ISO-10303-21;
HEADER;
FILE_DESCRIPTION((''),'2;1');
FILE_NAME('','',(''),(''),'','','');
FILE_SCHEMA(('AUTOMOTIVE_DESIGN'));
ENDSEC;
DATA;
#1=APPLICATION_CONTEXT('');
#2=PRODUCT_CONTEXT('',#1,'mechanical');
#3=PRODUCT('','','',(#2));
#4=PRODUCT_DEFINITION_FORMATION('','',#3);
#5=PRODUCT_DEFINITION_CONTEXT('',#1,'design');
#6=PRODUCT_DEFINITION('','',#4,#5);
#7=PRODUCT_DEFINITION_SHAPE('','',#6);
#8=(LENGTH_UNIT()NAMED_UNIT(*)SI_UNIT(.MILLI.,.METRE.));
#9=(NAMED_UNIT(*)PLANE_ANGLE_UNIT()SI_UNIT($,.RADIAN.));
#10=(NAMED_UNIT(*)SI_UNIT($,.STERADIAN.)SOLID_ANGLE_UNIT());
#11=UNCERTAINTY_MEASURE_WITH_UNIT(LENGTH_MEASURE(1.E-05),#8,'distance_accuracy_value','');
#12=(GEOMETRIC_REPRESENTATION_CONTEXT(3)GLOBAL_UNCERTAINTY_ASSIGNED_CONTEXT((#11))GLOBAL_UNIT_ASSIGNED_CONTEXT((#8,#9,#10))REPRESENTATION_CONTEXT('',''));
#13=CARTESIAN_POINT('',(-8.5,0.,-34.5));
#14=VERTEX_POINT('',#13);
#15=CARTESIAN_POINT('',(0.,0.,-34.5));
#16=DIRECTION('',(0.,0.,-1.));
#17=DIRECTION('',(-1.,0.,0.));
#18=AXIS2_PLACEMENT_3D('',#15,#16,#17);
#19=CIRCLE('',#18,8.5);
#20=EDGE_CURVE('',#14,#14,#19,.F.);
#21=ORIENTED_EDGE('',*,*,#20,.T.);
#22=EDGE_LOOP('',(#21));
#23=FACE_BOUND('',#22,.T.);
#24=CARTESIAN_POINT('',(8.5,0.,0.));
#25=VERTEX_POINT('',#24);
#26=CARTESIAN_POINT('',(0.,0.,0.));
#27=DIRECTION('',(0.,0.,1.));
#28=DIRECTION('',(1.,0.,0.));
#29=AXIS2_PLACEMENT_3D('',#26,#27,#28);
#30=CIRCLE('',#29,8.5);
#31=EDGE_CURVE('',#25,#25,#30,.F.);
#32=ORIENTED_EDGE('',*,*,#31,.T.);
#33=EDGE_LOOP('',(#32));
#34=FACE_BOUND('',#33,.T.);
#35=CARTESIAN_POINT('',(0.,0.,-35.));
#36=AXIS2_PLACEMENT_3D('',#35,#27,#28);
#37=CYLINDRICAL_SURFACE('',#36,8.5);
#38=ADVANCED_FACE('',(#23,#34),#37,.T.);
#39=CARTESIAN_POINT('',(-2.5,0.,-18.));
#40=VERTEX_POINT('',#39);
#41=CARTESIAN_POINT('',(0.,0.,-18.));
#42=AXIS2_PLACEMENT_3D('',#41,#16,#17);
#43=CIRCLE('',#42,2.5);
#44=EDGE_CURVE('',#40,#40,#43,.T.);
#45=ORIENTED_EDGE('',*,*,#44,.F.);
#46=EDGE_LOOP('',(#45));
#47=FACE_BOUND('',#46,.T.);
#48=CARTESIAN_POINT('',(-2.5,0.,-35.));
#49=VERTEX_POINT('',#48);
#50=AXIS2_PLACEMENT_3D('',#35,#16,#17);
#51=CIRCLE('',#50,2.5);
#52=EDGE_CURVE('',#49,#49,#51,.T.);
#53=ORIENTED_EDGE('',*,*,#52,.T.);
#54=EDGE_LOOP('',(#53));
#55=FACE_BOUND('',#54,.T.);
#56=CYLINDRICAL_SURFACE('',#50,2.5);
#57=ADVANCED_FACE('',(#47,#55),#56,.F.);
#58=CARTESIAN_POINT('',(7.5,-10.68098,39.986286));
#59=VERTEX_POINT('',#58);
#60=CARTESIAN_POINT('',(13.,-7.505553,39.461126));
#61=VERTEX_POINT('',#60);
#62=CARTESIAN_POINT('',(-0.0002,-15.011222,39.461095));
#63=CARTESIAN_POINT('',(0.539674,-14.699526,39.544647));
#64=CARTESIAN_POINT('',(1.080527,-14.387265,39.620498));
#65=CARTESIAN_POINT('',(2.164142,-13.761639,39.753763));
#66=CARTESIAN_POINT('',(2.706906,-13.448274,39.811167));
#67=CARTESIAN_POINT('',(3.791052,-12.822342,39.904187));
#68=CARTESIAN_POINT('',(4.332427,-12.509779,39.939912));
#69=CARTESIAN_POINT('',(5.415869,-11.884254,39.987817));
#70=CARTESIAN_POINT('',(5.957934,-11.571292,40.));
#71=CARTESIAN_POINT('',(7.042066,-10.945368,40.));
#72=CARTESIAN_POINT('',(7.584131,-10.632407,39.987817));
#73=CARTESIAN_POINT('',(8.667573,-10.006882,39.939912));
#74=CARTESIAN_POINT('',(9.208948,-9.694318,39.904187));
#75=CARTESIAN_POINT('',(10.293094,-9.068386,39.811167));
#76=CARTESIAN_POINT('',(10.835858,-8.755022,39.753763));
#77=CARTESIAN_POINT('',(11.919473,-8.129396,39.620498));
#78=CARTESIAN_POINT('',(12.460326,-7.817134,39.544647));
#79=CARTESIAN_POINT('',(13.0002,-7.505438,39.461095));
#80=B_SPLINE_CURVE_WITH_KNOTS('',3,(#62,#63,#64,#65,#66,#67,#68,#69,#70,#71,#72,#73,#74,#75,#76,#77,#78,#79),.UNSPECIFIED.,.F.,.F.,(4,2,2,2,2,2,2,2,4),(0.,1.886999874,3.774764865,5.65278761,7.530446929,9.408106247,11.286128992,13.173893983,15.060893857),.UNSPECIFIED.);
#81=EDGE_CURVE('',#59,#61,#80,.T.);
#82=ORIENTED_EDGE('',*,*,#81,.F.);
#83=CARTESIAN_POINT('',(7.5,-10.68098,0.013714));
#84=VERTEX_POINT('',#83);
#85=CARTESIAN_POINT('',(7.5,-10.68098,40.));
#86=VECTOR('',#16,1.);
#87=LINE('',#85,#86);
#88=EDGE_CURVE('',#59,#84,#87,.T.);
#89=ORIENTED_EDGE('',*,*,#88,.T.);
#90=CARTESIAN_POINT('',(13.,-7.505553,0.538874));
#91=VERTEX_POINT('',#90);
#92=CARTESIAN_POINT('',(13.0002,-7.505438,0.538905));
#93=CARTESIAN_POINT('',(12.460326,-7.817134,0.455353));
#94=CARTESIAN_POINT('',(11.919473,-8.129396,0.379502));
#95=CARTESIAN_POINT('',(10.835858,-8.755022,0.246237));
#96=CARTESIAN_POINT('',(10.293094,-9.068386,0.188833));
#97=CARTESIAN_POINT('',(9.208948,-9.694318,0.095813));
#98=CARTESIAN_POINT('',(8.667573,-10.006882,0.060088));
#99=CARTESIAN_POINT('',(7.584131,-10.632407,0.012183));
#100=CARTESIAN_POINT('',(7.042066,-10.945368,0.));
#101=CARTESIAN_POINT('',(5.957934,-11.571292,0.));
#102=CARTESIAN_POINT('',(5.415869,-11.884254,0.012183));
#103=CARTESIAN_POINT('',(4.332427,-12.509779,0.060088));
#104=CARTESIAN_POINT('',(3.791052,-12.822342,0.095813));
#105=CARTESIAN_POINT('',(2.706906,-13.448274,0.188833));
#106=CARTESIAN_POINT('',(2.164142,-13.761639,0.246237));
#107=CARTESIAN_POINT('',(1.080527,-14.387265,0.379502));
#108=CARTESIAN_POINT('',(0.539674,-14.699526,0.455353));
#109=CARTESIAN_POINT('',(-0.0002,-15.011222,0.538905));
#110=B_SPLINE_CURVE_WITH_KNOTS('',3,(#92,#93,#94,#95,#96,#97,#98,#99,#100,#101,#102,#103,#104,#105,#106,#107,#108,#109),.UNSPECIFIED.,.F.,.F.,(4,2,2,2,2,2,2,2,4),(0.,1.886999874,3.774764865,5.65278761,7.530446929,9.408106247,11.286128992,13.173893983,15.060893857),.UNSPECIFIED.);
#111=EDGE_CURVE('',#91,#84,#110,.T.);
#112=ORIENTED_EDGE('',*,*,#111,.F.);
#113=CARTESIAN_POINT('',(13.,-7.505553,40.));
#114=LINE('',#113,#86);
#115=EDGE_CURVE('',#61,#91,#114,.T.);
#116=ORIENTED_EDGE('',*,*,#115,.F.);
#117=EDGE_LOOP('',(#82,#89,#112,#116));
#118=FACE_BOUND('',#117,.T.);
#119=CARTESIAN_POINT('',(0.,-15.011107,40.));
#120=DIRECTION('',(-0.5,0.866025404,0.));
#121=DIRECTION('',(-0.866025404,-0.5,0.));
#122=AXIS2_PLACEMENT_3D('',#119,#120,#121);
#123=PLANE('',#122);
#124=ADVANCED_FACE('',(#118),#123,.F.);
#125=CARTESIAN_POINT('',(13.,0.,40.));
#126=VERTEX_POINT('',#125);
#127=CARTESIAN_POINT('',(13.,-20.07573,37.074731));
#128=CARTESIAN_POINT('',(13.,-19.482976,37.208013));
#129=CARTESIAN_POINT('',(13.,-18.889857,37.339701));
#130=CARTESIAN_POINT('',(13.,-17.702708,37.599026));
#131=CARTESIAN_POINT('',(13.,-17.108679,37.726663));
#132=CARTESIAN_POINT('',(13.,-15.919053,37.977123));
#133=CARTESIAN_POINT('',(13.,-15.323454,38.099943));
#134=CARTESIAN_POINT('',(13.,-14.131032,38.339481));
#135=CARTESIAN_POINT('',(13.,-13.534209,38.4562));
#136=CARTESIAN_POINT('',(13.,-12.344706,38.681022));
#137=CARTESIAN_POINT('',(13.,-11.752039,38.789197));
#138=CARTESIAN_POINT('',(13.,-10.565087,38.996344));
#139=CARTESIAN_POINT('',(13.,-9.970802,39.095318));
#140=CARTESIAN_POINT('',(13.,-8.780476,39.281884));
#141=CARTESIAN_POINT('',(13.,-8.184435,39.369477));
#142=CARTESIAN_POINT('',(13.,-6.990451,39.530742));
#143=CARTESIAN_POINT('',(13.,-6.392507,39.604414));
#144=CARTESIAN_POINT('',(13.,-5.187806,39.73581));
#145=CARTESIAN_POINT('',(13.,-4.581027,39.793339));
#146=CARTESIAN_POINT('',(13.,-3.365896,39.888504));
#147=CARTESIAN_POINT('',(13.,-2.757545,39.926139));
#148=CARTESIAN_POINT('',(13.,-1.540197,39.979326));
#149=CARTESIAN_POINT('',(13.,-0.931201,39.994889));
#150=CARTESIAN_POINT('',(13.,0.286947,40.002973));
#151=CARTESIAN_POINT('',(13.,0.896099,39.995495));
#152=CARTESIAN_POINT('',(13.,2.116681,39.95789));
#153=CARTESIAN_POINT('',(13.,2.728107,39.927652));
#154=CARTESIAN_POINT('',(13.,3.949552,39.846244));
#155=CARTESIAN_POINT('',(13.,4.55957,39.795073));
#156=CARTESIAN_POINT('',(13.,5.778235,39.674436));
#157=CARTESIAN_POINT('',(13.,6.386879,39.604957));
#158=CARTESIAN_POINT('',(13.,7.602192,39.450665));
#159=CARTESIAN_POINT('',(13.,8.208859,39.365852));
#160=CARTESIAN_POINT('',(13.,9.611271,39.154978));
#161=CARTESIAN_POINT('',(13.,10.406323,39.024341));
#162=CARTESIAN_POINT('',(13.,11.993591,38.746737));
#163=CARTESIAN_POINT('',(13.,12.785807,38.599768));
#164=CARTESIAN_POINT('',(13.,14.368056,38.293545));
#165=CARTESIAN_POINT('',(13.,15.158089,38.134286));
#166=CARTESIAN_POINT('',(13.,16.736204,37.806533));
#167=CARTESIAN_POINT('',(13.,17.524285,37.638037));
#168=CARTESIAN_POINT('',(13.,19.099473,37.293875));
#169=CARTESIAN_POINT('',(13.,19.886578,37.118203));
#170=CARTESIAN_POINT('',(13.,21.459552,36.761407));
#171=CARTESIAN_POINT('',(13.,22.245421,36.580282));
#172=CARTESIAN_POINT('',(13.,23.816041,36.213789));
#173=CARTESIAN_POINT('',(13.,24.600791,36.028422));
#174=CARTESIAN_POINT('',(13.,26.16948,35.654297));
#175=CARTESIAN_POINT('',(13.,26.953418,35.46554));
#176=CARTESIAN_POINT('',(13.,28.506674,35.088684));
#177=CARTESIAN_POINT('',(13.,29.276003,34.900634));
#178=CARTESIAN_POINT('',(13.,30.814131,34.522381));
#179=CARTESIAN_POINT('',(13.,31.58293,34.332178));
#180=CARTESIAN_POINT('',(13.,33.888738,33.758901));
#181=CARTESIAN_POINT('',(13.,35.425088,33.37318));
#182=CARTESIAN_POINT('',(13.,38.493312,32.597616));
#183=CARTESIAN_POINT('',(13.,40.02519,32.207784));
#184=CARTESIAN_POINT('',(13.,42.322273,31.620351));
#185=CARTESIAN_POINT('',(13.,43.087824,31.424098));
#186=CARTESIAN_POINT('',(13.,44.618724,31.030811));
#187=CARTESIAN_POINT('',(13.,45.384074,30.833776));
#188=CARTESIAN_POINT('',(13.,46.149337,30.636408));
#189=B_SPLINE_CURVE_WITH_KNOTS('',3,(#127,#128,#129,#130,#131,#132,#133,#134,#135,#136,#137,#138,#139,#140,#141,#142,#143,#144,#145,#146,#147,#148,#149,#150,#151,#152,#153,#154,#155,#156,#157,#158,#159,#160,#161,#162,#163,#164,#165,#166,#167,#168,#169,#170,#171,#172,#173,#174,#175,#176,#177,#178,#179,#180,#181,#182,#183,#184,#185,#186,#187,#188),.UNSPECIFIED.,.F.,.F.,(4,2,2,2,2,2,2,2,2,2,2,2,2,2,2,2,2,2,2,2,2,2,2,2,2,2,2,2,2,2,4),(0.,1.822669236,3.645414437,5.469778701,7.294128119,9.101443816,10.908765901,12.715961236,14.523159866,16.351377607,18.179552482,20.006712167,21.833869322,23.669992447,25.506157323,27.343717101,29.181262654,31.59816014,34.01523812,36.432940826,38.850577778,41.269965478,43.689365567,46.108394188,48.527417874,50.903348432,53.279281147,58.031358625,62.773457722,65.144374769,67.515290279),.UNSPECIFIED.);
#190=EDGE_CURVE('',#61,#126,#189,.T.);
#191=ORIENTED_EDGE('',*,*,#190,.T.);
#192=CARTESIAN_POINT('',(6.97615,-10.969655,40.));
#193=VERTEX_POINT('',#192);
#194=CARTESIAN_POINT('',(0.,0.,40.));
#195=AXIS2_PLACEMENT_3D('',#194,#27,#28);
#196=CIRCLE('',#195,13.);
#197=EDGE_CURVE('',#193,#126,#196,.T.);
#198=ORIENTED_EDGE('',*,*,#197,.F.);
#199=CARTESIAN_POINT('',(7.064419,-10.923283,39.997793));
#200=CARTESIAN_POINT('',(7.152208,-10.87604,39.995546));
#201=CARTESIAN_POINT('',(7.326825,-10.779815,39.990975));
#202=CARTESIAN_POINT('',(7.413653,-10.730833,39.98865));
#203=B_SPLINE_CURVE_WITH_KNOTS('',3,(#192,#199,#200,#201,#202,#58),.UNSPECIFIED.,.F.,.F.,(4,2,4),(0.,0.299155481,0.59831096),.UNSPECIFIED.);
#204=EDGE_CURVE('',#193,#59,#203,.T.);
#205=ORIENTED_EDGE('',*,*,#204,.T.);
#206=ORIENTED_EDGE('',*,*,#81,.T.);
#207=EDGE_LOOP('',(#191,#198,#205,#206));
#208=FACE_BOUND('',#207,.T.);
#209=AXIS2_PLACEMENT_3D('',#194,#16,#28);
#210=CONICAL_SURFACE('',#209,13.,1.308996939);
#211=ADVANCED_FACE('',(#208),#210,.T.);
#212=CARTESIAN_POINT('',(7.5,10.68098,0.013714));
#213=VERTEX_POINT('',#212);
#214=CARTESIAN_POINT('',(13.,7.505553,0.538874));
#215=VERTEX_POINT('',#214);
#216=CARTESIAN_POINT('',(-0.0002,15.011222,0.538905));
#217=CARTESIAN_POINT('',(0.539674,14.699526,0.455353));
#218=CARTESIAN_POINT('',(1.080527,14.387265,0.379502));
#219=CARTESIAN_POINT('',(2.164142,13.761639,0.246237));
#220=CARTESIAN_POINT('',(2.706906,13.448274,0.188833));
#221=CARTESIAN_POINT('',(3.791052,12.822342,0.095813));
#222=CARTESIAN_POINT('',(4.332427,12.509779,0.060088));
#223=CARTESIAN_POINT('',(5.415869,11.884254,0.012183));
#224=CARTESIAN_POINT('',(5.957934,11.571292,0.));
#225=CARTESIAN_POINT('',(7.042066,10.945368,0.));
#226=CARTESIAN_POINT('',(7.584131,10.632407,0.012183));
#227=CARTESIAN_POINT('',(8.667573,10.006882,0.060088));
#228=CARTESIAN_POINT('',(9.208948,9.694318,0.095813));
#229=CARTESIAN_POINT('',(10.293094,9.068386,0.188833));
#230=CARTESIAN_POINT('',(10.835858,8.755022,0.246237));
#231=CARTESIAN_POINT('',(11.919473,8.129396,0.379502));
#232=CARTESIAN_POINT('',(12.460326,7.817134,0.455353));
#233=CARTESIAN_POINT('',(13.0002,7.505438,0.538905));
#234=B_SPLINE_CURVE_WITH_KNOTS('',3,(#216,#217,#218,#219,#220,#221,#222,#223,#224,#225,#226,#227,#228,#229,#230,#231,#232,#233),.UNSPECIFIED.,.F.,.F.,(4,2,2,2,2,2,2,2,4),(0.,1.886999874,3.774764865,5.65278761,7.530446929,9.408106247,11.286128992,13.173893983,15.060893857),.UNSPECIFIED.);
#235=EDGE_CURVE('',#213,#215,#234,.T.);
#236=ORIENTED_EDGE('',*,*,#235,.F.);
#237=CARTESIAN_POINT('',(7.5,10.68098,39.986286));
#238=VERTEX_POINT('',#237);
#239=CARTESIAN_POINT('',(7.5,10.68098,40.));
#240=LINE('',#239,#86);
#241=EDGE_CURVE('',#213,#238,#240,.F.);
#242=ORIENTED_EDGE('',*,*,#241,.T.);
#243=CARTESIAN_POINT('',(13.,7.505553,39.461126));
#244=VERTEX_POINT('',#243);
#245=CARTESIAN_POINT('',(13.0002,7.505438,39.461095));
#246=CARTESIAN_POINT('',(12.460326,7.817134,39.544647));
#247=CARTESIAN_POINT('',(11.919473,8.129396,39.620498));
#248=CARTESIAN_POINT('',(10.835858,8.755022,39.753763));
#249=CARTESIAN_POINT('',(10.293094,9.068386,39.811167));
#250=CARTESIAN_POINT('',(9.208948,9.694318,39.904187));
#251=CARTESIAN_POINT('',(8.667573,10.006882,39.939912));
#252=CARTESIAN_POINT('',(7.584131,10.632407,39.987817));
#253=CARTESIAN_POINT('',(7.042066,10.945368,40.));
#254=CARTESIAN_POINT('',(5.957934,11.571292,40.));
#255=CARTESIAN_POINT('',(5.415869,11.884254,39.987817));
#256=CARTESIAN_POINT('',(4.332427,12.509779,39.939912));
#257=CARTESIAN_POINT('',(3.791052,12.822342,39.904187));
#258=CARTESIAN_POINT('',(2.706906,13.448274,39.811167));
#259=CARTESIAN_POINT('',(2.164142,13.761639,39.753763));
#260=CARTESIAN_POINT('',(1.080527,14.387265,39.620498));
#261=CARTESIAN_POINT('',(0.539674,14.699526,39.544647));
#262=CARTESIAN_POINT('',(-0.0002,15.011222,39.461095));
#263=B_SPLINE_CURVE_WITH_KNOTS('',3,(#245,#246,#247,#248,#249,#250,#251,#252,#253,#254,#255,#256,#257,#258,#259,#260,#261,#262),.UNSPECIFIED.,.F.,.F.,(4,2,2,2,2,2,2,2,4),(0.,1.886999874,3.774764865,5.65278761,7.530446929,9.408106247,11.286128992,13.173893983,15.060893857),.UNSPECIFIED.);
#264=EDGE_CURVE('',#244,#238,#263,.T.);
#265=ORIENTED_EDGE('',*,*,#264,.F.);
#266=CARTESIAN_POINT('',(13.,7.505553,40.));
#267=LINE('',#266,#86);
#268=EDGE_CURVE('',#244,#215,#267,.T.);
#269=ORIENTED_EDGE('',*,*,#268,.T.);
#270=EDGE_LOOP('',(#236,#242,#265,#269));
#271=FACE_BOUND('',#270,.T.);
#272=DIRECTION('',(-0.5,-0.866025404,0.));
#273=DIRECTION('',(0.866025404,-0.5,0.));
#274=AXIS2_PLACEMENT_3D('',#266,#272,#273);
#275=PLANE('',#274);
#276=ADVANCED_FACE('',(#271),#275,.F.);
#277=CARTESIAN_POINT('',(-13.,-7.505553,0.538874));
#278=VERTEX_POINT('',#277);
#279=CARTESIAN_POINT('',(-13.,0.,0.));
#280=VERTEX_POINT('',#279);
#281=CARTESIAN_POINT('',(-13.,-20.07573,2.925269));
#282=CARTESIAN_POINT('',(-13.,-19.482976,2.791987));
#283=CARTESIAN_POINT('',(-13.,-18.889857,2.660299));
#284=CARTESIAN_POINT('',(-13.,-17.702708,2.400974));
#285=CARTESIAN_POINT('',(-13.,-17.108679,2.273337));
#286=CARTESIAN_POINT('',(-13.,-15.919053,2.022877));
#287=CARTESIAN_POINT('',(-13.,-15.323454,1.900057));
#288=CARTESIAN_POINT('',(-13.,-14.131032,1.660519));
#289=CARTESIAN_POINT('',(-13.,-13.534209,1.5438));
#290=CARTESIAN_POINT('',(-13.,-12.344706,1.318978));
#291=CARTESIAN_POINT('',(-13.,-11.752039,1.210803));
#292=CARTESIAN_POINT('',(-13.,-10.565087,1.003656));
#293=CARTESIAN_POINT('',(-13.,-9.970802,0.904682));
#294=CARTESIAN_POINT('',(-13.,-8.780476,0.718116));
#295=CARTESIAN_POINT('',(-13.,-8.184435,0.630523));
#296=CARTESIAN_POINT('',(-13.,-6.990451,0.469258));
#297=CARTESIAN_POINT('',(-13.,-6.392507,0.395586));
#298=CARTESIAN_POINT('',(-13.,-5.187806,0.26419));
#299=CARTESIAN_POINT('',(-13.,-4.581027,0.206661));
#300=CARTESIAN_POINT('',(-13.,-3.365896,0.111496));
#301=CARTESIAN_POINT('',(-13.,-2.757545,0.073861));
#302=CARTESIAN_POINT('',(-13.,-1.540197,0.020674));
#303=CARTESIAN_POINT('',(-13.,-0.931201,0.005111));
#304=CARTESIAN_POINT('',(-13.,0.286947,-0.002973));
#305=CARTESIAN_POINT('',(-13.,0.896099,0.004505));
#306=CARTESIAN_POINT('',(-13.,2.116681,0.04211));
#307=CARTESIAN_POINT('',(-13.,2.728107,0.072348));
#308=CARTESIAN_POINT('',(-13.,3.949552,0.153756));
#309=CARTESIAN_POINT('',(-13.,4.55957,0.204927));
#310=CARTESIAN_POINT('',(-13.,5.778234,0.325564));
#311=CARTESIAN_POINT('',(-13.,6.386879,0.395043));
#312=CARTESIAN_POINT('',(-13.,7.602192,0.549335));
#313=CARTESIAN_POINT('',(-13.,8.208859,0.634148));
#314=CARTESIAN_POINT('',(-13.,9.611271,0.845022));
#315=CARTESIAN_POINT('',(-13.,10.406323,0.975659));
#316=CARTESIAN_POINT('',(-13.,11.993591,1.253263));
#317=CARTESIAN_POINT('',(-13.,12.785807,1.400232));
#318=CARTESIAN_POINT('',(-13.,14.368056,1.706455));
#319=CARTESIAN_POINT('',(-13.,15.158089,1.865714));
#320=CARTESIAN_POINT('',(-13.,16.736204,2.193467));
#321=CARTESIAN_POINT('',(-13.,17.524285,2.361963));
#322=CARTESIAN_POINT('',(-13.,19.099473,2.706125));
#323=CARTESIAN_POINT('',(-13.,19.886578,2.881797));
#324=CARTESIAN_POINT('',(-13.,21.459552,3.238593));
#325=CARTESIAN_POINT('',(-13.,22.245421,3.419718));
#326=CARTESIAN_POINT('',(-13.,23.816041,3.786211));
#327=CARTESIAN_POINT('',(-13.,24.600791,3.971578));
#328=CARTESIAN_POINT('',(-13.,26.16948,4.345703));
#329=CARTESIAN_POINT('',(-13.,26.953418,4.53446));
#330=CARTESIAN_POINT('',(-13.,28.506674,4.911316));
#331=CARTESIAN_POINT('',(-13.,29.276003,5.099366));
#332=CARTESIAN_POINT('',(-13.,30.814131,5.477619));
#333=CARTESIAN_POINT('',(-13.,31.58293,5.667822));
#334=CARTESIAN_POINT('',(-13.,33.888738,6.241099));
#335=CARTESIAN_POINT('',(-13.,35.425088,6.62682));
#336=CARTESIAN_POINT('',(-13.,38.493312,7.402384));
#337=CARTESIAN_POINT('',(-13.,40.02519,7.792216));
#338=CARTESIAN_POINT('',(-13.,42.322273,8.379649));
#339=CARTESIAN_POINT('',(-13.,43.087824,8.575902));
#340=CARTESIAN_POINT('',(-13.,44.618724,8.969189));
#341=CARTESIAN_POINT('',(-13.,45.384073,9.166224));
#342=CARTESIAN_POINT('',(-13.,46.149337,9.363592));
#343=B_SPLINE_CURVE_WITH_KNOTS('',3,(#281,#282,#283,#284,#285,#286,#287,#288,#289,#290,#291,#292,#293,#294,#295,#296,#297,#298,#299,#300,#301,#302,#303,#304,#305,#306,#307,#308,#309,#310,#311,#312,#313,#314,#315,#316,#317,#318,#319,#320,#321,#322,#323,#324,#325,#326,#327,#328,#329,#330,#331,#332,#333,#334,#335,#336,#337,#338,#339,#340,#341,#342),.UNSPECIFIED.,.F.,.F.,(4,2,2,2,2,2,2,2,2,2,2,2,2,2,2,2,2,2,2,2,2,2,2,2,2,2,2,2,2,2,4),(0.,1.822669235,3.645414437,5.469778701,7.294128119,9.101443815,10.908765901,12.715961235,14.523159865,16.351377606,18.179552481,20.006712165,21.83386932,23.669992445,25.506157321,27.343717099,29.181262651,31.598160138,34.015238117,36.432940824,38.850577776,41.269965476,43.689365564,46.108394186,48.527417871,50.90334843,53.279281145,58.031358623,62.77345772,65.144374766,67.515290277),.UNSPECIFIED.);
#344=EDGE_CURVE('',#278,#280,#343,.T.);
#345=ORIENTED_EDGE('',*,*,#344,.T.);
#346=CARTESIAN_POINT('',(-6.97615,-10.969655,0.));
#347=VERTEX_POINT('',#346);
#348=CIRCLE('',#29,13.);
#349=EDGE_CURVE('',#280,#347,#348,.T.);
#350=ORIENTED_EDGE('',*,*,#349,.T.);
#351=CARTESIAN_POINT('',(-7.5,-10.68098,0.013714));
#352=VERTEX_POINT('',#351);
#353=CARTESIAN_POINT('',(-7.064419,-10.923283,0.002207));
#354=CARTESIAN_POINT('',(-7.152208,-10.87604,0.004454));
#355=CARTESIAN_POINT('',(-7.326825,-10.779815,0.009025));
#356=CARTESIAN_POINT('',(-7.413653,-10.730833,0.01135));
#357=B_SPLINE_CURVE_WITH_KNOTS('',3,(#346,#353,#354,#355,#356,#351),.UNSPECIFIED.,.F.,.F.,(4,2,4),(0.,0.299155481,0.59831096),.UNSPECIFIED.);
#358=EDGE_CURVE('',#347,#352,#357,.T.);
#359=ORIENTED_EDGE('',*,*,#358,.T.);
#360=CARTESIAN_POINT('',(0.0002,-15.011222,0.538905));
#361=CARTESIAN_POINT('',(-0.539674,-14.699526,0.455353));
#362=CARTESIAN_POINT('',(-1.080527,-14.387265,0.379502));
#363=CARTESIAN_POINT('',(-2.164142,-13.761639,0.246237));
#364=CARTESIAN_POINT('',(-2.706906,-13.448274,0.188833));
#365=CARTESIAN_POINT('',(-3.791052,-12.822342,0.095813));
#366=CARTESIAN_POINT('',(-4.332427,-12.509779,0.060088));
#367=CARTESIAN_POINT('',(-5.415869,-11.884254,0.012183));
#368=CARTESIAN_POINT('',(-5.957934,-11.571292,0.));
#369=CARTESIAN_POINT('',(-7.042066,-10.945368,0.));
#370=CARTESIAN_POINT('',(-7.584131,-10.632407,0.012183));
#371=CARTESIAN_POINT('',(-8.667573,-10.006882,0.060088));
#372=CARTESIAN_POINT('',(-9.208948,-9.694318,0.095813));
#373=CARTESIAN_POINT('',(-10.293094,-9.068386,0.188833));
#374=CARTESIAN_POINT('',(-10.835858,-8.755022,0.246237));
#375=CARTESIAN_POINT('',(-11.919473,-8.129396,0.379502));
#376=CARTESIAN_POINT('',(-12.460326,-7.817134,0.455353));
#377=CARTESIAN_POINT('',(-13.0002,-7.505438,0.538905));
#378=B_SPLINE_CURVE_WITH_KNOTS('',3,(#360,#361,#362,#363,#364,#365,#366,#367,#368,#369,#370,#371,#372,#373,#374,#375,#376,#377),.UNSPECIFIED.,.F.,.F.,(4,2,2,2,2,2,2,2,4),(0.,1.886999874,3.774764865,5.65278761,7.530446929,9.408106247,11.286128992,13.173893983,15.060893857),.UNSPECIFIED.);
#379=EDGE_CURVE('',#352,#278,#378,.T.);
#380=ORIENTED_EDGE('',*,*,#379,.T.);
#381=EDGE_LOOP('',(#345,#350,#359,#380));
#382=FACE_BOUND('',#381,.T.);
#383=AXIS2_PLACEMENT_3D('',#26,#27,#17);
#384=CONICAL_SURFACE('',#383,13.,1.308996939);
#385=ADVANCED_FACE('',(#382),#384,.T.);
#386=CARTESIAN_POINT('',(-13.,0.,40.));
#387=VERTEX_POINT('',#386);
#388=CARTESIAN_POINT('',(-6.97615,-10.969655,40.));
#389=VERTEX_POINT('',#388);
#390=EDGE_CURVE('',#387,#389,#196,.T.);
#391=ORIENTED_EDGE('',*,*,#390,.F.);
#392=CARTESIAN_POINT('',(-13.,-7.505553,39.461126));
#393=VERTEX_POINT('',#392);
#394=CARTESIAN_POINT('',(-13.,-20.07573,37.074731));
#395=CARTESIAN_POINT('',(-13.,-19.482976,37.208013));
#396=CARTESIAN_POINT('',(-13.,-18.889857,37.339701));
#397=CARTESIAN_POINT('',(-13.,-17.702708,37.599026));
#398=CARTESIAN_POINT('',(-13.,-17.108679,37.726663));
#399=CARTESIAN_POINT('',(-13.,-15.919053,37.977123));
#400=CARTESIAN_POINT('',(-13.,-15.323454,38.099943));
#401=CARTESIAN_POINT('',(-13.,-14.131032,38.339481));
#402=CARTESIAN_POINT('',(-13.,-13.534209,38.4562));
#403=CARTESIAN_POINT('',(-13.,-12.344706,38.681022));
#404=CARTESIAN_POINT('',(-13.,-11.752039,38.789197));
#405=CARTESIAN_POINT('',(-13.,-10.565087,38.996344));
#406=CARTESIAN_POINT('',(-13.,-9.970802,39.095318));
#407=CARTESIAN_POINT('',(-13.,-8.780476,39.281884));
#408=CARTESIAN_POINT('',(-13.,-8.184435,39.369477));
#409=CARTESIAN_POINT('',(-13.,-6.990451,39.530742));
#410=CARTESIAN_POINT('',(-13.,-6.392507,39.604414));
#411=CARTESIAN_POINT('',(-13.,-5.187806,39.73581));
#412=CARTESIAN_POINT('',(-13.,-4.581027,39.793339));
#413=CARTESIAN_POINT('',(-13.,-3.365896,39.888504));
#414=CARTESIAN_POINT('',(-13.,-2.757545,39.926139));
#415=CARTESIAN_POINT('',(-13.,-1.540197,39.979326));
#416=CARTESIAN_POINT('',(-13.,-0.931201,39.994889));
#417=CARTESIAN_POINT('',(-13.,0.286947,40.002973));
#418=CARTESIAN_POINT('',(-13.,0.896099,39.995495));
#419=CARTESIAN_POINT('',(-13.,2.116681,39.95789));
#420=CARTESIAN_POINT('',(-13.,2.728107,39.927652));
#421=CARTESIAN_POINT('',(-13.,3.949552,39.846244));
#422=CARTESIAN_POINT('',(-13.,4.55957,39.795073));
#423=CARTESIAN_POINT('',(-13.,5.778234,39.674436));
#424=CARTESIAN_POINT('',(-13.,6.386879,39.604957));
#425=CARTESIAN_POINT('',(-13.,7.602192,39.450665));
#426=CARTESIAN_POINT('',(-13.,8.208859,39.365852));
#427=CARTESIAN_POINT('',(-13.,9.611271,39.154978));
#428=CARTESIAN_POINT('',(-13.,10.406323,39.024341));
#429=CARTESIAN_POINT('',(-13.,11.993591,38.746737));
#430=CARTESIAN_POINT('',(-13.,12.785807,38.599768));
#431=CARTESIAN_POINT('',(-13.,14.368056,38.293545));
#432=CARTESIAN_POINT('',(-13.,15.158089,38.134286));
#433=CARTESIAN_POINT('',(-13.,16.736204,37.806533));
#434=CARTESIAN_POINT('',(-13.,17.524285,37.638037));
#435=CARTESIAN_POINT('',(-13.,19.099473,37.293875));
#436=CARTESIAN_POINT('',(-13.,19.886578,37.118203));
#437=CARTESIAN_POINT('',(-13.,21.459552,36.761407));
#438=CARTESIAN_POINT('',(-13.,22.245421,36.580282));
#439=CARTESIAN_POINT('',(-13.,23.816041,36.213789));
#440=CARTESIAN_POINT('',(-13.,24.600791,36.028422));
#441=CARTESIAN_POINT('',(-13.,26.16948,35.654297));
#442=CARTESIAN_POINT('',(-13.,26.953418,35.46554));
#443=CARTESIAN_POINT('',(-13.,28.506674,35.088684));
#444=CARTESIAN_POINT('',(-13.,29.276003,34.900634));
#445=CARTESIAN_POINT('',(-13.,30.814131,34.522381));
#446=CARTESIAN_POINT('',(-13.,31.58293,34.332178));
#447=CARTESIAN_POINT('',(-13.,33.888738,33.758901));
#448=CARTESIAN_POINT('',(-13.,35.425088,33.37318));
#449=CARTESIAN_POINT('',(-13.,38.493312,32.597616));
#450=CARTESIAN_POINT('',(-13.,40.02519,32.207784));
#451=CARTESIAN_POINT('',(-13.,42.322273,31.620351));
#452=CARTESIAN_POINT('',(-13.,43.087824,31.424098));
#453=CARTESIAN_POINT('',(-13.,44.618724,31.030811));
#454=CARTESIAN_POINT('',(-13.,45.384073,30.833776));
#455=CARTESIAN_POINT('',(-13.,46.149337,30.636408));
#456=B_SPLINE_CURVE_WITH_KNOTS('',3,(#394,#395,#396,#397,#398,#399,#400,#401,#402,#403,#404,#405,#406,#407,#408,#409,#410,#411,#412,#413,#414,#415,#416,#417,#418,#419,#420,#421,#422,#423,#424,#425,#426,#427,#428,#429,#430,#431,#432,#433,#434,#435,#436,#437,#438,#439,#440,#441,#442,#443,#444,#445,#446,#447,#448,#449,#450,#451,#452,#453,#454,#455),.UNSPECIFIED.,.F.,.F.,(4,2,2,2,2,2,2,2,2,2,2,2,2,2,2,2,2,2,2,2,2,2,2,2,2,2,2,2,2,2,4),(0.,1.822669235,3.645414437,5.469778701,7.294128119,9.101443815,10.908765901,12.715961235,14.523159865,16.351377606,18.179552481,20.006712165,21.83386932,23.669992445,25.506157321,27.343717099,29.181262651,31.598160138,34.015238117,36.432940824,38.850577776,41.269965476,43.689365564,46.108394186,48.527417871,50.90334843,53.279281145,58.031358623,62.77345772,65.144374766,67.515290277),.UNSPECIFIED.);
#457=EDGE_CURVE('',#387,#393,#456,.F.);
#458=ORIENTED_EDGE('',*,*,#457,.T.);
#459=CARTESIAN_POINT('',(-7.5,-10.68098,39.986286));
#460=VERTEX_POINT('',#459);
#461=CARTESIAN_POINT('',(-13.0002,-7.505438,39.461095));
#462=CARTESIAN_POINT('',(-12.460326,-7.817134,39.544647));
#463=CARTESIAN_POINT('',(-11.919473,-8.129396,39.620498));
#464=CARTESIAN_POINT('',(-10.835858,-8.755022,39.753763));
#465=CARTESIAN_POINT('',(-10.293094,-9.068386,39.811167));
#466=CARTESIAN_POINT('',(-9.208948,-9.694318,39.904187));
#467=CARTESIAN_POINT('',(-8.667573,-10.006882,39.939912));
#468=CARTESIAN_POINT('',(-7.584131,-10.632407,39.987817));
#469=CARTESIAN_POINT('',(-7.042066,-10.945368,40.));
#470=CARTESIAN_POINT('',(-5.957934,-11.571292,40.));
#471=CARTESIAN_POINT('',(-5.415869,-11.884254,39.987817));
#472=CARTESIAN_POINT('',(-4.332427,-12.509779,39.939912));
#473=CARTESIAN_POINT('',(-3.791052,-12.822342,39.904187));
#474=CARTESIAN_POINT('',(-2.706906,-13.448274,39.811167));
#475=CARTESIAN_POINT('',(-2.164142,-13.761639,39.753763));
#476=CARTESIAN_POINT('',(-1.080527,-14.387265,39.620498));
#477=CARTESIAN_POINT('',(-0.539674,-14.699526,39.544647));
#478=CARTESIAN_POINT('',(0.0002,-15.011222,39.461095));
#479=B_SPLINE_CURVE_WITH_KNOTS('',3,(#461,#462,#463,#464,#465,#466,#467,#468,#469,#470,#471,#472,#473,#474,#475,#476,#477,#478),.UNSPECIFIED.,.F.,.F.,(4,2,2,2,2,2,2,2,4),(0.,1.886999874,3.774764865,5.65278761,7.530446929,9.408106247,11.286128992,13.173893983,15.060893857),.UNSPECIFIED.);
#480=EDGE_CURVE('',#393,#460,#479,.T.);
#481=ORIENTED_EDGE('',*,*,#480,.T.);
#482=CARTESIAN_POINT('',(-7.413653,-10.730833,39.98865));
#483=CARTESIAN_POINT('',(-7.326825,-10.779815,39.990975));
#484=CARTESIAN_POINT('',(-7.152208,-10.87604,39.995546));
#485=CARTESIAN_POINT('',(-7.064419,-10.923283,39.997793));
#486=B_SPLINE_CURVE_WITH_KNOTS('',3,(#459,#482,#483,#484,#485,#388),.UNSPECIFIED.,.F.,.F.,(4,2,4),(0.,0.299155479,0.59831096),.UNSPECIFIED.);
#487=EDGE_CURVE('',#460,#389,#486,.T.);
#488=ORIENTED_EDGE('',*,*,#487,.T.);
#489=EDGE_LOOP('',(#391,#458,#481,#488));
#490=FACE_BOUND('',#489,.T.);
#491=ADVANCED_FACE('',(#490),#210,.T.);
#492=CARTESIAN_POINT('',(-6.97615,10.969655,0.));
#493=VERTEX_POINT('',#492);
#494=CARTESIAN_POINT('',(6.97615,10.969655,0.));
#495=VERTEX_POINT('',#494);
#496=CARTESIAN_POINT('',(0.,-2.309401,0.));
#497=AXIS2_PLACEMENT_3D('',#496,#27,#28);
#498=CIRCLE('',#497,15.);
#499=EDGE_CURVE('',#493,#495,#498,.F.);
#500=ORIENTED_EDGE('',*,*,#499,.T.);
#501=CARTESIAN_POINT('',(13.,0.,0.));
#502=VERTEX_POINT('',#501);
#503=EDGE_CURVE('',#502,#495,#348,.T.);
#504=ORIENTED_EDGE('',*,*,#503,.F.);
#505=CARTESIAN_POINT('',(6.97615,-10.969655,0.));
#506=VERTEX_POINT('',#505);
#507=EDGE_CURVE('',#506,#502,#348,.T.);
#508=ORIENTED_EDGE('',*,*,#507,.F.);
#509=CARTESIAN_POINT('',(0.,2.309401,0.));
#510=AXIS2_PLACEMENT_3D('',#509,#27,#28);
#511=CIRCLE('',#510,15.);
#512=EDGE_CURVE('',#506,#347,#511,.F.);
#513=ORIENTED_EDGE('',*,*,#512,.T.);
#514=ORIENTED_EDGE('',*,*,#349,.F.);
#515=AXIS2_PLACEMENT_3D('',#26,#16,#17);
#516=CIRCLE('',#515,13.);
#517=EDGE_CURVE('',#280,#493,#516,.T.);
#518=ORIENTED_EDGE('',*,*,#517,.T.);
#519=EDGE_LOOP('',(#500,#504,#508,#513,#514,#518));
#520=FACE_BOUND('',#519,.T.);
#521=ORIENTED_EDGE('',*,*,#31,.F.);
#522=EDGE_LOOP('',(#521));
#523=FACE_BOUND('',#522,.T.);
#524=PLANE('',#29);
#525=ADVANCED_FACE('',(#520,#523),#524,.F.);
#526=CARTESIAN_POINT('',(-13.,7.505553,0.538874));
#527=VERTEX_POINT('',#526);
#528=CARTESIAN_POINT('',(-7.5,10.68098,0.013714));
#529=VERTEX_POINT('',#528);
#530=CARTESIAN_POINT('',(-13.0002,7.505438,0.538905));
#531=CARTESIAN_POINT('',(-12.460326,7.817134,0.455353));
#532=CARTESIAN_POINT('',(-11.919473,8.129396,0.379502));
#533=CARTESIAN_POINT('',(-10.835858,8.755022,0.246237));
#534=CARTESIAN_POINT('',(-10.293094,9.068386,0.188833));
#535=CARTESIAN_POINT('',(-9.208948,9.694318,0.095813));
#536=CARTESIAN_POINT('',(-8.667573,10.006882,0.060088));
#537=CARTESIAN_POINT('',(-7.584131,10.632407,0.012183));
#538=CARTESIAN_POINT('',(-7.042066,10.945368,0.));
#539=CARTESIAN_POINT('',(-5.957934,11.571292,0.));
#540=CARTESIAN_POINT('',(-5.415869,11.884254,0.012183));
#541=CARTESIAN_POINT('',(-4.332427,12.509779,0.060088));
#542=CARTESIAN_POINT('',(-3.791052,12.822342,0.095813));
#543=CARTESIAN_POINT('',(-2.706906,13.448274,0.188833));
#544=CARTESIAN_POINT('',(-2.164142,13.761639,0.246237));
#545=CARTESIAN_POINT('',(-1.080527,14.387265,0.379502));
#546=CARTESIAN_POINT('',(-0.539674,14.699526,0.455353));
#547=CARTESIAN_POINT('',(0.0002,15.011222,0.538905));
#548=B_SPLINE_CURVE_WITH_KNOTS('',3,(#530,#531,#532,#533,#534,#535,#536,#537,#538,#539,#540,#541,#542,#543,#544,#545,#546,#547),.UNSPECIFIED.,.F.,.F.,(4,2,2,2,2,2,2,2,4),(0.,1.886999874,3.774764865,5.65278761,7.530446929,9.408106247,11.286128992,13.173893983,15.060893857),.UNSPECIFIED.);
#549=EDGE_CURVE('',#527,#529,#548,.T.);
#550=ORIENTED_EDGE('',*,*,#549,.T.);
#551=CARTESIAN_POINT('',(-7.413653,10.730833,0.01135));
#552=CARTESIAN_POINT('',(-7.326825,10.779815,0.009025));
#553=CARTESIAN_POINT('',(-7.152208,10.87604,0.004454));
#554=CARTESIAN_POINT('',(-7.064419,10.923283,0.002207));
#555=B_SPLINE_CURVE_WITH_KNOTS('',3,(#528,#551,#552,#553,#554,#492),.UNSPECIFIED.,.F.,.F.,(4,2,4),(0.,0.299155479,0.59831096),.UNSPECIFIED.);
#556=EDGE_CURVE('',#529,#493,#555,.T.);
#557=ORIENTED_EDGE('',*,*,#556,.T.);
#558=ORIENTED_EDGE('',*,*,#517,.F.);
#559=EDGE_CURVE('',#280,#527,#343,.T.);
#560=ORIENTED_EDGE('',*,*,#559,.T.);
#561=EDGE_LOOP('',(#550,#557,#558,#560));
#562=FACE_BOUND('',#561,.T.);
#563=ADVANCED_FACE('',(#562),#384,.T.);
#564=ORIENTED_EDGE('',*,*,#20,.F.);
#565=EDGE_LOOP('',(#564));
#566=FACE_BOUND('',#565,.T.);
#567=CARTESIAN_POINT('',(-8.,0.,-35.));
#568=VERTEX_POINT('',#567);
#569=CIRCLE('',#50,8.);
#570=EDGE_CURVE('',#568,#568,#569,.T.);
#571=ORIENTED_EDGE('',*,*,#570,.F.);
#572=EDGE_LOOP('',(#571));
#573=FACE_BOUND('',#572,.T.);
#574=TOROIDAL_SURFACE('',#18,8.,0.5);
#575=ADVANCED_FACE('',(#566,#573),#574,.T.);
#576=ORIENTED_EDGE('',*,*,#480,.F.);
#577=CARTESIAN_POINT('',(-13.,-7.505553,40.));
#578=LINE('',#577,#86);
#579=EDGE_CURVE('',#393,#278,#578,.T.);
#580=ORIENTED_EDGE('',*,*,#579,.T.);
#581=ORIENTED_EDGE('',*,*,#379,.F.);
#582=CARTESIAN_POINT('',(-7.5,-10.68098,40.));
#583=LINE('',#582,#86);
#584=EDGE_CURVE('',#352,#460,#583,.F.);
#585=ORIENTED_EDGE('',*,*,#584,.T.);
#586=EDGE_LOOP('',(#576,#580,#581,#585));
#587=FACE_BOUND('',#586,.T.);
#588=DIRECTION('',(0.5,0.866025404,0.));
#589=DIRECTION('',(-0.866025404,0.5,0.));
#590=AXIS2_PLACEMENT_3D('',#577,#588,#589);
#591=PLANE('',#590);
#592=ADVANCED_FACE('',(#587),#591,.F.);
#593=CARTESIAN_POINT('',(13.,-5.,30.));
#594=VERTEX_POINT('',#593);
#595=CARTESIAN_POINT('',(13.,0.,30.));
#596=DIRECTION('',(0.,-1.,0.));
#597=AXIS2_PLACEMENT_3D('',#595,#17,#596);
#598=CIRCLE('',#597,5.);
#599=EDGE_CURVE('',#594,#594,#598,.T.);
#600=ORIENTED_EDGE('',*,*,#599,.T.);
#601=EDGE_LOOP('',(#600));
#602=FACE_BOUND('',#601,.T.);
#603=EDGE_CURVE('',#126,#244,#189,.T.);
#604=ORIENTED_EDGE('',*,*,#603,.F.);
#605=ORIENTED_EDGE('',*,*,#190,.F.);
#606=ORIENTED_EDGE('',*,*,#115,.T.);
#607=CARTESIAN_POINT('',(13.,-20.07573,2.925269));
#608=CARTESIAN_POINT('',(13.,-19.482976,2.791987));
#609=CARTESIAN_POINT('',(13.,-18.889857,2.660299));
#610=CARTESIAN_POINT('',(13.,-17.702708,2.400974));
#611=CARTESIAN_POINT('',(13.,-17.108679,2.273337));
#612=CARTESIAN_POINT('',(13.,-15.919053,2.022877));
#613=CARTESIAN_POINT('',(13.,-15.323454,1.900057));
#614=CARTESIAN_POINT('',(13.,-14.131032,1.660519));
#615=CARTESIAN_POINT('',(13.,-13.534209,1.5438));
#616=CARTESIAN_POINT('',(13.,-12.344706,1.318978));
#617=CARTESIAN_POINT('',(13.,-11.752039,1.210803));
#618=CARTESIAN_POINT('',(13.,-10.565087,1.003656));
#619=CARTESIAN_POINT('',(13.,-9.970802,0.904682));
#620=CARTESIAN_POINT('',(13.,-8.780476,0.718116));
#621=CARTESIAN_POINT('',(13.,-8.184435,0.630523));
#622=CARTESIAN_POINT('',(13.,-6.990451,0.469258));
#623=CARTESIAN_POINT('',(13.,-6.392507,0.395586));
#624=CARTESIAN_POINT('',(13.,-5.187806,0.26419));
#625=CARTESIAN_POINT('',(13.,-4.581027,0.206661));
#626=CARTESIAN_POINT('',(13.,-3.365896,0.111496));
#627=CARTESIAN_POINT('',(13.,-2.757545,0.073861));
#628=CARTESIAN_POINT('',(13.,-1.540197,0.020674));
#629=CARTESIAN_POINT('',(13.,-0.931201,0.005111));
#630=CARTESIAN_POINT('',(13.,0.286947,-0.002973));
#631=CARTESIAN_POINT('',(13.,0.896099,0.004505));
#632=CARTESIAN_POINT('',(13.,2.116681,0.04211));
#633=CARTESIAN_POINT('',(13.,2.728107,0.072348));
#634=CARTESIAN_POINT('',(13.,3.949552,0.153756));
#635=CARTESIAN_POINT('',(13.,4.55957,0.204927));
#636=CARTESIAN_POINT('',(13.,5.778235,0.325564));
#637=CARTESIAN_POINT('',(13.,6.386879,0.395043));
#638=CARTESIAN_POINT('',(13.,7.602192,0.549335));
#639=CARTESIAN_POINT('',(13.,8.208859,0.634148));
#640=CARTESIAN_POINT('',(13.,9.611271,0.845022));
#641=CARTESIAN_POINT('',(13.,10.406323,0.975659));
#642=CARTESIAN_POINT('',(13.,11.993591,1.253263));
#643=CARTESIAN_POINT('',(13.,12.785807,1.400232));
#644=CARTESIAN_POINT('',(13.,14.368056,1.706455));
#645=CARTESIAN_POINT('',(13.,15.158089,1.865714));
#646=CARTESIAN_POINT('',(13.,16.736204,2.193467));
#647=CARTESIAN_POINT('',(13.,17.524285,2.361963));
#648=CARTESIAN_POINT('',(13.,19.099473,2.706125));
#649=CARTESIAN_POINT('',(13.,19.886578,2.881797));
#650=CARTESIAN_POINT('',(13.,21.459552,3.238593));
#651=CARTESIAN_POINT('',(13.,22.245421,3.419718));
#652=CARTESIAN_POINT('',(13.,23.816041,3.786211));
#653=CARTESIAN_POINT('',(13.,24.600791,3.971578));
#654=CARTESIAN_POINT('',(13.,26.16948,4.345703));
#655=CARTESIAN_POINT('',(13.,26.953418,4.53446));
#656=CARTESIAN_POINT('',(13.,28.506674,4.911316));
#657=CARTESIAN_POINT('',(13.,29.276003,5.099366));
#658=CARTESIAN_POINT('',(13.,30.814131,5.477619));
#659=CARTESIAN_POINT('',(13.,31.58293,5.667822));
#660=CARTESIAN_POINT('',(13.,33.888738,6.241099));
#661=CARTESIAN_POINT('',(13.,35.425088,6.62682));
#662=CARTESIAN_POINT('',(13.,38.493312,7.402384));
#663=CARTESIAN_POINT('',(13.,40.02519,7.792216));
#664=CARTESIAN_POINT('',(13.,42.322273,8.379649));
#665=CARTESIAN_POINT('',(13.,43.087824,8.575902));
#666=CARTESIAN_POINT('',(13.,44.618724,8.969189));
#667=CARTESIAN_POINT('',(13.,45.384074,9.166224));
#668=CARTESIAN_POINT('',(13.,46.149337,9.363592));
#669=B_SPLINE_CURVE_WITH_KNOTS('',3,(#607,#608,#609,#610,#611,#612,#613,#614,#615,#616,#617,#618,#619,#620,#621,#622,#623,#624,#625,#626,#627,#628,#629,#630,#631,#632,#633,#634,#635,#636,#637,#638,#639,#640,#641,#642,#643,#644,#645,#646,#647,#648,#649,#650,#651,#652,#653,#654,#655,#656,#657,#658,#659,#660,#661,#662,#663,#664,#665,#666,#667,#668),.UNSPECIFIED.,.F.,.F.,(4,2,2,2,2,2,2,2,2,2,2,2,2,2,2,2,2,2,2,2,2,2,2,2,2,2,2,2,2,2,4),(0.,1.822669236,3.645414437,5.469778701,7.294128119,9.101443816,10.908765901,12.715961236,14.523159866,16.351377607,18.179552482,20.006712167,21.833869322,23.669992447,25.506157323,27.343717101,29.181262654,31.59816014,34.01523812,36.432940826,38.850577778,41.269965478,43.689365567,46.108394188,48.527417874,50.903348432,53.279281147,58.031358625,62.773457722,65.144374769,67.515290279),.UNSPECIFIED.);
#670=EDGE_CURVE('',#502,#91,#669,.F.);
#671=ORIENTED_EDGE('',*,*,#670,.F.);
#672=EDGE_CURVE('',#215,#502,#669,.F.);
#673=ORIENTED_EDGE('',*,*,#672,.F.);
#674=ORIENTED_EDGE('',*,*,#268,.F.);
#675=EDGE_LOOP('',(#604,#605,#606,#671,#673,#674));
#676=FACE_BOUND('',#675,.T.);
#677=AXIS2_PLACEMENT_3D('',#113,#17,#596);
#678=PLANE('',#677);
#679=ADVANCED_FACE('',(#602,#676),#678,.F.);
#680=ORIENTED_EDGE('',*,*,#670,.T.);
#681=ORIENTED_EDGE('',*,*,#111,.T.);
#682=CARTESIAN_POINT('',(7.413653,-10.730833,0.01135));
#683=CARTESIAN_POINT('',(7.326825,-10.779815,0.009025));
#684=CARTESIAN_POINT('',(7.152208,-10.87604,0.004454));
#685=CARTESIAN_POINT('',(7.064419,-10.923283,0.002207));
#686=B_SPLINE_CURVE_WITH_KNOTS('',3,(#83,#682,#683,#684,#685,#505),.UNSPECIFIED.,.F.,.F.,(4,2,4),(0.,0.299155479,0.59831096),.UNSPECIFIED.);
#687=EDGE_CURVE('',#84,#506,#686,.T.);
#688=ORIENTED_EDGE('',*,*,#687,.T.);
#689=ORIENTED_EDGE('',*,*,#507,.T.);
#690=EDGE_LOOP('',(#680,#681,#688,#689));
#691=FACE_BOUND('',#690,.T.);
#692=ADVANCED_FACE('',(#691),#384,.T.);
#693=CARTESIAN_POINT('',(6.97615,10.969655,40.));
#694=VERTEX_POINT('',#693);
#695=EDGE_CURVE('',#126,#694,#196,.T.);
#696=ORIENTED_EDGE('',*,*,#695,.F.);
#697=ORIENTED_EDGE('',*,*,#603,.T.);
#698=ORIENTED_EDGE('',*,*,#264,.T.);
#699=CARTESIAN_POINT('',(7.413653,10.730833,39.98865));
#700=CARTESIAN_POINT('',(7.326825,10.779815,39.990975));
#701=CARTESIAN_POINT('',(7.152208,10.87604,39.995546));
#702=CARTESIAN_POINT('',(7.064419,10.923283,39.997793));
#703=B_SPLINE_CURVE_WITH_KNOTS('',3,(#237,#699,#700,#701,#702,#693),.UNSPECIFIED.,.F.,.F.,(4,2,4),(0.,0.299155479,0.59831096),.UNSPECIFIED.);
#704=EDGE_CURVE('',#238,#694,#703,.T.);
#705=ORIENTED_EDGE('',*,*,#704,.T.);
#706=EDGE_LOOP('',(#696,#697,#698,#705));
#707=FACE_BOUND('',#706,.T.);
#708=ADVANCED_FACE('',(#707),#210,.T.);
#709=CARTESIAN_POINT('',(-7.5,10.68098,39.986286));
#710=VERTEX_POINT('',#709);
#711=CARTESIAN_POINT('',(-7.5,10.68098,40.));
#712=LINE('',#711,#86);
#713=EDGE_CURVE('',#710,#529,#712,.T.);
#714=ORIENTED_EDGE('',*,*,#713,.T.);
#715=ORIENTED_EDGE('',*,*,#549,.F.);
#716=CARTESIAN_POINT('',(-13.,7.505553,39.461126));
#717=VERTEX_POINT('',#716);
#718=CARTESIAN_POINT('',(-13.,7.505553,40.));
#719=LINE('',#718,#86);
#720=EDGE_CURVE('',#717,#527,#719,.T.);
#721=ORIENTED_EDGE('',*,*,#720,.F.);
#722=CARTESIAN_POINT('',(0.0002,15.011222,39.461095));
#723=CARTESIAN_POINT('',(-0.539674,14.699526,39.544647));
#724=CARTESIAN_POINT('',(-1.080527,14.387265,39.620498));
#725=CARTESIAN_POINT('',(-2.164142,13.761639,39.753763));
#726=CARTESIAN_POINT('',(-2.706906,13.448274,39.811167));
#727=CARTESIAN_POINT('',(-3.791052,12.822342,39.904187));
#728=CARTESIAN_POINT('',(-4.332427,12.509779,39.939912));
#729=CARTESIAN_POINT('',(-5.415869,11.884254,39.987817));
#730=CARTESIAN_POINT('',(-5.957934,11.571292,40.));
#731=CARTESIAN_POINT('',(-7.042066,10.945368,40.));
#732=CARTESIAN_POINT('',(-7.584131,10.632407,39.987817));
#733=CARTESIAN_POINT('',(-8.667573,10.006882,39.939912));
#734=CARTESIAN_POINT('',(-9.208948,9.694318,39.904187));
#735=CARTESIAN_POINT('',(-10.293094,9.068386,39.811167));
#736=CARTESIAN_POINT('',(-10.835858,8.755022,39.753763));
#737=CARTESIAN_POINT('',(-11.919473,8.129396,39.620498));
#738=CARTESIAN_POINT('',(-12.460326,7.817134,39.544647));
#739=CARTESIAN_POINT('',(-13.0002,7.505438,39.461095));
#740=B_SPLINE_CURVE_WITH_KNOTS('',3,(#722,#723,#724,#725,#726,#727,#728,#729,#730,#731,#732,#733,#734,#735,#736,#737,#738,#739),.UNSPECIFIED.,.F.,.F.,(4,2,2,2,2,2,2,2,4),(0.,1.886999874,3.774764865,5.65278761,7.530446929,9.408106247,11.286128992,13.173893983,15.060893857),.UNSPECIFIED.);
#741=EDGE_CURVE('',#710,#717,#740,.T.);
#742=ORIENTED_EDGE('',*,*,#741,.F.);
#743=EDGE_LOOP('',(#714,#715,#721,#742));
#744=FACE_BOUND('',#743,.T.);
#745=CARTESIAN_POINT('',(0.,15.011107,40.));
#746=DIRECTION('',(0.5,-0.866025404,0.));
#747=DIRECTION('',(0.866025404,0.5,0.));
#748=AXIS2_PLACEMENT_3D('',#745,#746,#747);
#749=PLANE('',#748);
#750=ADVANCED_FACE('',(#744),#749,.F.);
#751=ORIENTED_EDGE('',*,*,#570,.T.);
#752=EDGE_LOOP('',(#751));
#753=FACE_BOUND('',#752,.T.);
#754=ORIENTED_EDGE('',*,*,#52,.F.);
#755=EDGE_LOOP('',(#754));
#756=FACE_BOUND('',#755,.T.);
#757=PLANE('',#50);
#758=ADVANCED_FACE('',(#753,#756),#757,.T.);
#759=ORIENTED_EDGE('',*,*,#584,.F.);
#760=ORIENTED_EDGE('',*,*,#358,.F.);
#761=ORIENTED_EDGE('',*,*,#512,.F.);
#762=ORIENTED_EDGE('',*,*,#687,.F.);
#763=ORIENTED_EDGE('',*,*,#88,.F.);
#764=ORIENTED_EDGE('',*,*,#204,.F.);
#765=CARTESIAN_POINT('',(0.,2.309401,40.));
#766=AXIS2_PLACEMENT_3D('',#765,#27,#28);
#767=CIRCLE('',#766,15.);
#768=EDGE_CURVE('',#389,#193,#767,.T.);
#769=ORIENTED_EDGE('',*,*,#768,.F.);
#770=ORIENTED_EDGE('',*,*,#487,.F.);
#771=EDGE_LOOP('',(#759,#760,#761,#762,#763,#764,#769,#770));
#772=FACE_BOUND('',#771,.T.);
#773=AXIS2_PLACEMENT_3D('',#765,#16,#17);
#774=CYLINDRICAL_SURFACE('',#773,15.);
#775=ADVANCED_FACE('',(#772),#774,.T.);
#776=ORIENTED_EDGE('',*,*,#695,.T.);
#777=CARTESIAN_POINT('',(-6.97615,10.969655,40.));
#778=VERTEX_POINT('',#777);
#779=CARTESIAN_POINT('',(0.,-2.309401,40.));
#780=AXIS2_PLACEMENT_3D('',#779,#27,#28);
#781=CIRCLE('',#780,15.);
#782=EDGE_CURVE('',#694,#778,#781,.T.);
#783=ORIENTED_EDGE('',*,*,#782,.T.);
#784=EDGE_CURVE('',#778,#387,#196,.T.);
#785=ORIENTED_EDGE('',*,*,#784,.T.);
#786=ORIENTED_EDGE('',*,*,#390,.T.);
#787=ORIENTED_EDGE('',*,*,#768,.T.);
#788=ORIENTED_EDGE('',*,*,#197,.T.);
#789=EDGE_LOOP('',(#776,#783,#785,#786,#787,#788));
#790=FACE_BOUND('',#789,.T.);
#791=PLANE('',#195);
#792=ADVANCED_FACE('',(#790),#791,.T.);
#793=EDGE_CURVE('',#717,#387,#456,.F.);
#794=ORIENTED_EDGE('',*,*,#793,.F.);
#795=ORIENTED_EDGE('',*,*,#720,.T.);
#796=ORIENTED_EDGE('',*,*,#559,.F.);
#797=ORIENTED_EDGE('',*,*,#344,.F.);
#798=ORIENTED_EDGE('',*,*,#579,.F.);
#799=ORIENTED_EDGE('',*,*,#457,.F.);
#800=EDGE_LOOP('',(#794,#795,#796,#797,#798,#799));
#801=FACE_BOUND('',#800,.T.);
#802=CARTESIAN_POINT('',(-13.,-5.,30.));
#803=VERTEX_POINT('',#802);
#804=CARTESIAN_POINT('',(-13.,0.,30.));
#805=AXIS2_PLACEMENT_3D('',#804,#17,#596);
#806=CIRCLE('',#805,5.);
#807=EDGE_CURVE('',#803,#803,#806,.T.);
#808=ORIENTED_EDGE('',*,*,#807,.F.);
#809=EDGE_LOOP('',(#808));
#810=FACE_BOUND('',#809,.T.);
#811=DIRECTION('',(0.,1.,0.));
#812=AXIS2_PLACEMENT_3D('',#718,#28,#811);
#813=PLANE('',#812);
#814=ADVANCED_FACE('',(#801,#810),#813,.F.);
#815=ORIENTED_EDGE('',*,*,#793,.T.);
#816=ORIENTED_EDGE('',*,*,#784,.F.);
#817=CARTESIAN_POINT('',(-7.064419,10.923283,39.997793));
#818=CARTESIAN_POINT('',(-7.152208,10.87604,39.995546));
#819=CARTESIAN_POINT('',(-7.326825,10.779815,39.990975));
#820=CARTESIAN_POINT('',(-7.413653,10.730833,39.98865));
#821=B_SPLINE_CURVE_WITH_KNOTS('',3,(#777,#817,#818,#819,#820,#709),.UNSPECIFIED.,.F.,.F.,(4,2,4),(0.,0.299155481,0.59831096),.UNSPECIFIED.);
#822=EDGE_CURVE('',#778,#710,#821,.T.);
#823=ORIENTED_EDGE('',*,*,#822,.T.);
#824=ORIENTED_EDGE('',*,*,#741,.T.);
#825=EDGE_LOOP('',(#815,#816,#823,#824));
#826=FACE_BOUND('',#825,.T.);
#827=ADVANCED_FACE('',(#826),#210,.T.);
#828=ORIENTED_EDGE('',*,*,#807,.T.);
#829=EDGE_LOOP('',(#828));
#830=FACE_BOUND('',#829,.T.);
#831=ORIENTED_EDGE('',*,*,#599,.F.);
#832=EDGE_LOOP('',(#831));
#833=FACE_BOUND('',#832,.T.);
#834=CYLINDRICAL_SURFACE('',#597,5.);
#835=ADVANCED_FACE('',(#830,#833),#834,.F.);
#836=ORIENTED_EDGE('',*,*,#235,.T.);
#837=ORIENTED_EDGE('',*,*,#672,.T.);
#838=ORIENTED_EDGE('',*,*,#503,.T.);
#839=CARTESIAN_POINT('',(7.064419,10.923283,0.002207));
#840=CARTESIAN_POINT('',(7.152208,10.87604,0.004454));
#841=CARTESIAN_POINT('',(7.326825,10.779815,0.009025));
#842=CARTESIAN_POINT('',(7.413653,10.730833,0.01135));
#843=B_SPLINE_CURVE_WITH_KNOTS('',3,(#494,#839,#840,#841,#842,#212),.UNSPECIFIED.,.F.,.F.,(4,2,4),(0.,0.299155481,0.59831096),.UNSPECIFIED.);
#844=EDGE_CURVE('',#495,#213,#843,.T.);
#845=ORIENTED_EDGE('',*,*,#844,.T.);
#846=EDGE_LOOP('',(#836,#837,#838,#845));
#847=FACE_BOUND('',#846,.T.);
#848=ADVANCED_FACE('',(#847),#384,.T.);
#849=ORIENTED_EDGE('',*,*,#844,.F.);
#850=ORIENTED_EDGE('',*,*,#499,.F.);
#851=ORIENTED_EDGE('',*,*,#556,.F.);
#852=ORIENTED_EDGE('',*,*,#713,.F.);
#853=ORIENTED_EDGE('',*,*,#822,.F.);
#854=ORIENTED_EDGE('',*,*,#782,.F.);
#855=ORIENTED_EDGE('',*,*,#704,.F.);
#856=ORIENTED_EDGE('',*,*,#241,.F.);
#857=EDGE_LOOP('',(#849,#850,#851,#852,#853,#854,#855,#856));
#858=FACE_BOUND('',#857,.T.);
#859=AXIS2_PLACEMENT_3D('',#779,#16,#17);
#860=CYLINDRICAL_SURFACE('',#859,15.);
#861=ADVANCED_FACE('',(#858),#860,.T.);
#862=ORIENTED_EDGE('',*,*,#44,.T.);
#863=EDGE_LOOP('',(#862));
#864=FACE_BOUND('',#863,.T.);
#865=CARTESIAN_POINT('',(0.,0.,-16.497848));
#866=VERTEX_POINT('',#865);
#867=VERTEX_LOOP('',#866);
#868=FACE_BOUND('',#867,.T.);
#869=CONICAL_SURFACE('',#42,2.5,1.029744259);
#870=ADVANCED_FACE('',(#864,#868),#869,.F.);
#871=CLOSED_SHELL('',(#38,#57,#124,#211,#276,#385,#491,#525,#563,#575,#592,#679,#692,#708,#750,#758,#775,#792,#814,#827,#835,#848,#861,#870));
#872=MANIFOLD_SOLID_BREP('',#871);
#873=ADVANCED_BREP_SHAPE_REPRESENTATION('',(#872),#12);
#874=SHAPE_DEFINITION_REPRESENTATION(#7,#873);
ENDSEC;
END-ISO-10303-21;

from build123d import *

# Parameters (mm, degrees)
RESSALTO_EXTRUS_O1_DEPTH  = 40
ESBO_O2_OUTSIDE_W         = 151.236
ESBO_O2_OUTSIDE_H         = 155.258
ESBO_O2_OUTSIDE_R         = 13
CORTE_EXTRUS_O1_DEPTH     = 15
CORTE_EXTRUS_O1_DRAFT     = -75
ESBO_O3_OUTSIDE_W         = 151.236
ESBO_O3_OUTSIDE_H         = 155.258
ESBO_O3_OUTSIDE_R         = 13
CORTE_EXTRUS_O2_DEPTH     = 15
CORTE_EXTRUS_O2_DRAFT     = -75
ESBO_O4_R                 = 8.5
RESSALTO_EXTRUS_O2_DEPTH  = 35
FILETE1_R                 = 0.5
FURO_ROSCADO_DE_M61_D     = 5
FURO_ROSCADO_DE_M61_DEPTH = 17
FURO_ROSCADO_DE_M61_TIP   = 1.502151548
ESBO_O7_R                 = 5
CORTE_EXTRUS_O3_DEPTH     = 51.013331556
FILETE2_R                 = 15
FILETE3_R                 = 15


with BuildPart() as part:
    # Esboço1 → Ressalto-extrusão1 (new body)
    with BuildSketch(Plane.XY):
        Polygon((0, 15.011106999), (-13, 7.505553499), (-13, -7.505553499), (0, -15.011106999), (13, -7.505553499), (13, 7.505553499), align=None)
    extrude(amount=RESSALTO_EXTRUS_O1_DEPTH)


with BuildPart() as corte_extrus_o1_tool:
    # Esboço2 outside → Corte-extrusão1 (with draft: the straight prism first)
    with BuildSketch(Plane.XY.offset(40)):
        Rectangle(ESBO_O2_OUTSIDE_W, ESBO_O2_OUTSIDE_H)
        Circle(ESBO_O2_OUTSIDE_R, mode=Mode.SUBTRACT)
    extrude(amount=-CORTE_EXTRUS_O1_DEPTH)
    # Corte-extrusão1: the draft: its side faces are tilted about the plane it starts from
    corte_extrus_o1_sides = [corte_extrus_o1_tool.faces().sort_by_distance(p)[0] for p in [
        (0, -77.629, 32.5),
        (75.618, 0, 32.5),
        (0, 77.629, 32.5),
        (-75.618, 0, 32.5),
        (-13, 0, 32.5),
    ]]
    draft(corte_extrus_o1_sides, Plane.XY.offset(40), CORTE_EXTRUS_O1_DRAFT)


with BuildPart() as part_1:
    add(part.part)

    # Corte-extrusão1: cut by corte_extrus_o1_tool
    add(corte_extrus_o1_tool.part, mode=Mode.SUBTRACT)


with BuildPart() as corte_extrus_o2_tool:
    # Esboço3 outside → Corte-extrusão2 (with draft: the straight prism first)
    with BuildSketch(Plane(origin=(0, 0, 0), x_dir=(-1, 0, 0), z_dir=(0, 0, -1))):
        Rectangle(ESBO_O3_OUTSIDE_W, ESBO_O3_OUTSIDE_H)
        Circle(ESBO_O3_OUTSIDE_R, mode=Mode.SUBTRACT)
    extrude(amount=-CORTE_EXTRUS_O2_DEPTH)
    # Corte-extrusão2: the draft: its side faces are tilted about the plane it starts from
    corte_extrus_o2_sides = [corte_extrus_o2_tool.faces().sort_by_distance(p)[0] for p in [
        (0, -77.629, 7.5),
        (-75.618, 0, 7.5),
        (0, 77.629, 7.5),
        (75.618, 0, 7.5),
        (13, 0, 7.5),
    ]]
    draft(corte_extrus_o2_sides, Plane(origin=(0, 0, 0), x_dir=(-1, 0, 0), z_dir=(0, 0, -1)), CORTE_EXTRUS_O2_DRAFT)


with BuildPart() as part_2:
    add(part_1.part)

    # Corte-extrusão2: cut by corte_extrus_o2_tool
    add(corte_extrus_o2_tool.part, mode=Mode.SUBTRACT)

    # Esboço4 → Ressalto-extrusão2 (add)
    with BuildSketch(Plane(origin=(0, 0, 0), x_dir=(-1, 0, 0), z_dir=(0, 0, -1))):
        with Locations(Location((0, 0, 0), (0, 0, 180))):
            Circle(ESBO_O4_R)
    extrude(amount=RESSALTO_EXTRUS_O2_DEPTH)

    # Filete1
    filete1_edges = [part_2.edges().sort_by_distance(p)[0] for p in [
        (-8.5, 0, -35),
    ]]
    fillet(filete1_edges, radius=FILETE1_R)

    # Furo roscado de M61
    with Locations(Plane(origin=(0, 0, -35), x_dir=(-1, 0, 0), z_dir=(0, 0, -1))):
        with Locations((0, 0)):
            Hole(FURO_ROSCADO_DE_M61_D / 2, depth=FURO_ROSCADO_DE_M61_DEPTH)
            with Locations((0, 0, -(FURO_ROSCADO_DE_M61_DEPTH + FURO_ROSCADO_DE_M61_TIP / 2))):  # 118° drill point
                Cone(0, FURO_ROSCADO_DE_M61_D / 2, FURO_ROSCADO_DE_M61_TIP, mode=Mode.SUBTRACT)

    # Esboço7 → Corte-extrusão3 (cut, through all)
    with BuildSketch(Plane.ZY.offset(13)):
        with Locations(Location((30, 0, 0), (0, 0, 270))):
            Circle(ESBO_O7_R)
    extrude(amount=-CORTE_EXTRUS_O3_DEPTH, mode=Mode.SUBTRACT)

    # Filete2
    # the kernel refuses this fillet: 15 mm, written as the material it takes off along each edge
    with BuildSketch(Plane(origin=(0, 15.011106999, -21.111760598), x_dir=(0.8660254037844415, -0.49999999999999506, 0), z_dir=(0, 0, 1))) as filete2_piece_1:
        with BuildLine():
            CenterArc((FILETE2_R * 0.57735026919, -FILETE2_R), FILETE2_R, 90, 60)
            Line((-FILETE2_R * 0.288675134595, -FILETE2_R * 0.5), (0, 0))
            Line((0, 0), (FILETE2_R * 0.57735026919, 0))
        make_face()
    extrude(amount=82.223521197, mode=Mode.SUBTRACT)

    # Filete3
    # the kernel refuses this fillet: 15 mm, written as the material it takes off along each edge
    with BuildSketch(Plane(origin=(0, -15.011106999, -21.111760598), x_dir=(0.8660254037844344, 0.5000000000000074, 0), z_dir=(0, 0, 1))) as filete3_piece_1:
        with BuildLine():
            CenterArc((FILETE3_R * 0.57735026919, FILETE3_R), FILETE3_R, 210, 60)
            Line((-FILETE3_R * 0.288675134595, FILETE3_R * 0.5), (0, 0))
            Line((0, 0), (FILETE3_R * 0.57735026919, 0))
        make_face()
    extrude(amount=82.223521197, mode=Mode.SUBTRACT)


solid = part_2.part
